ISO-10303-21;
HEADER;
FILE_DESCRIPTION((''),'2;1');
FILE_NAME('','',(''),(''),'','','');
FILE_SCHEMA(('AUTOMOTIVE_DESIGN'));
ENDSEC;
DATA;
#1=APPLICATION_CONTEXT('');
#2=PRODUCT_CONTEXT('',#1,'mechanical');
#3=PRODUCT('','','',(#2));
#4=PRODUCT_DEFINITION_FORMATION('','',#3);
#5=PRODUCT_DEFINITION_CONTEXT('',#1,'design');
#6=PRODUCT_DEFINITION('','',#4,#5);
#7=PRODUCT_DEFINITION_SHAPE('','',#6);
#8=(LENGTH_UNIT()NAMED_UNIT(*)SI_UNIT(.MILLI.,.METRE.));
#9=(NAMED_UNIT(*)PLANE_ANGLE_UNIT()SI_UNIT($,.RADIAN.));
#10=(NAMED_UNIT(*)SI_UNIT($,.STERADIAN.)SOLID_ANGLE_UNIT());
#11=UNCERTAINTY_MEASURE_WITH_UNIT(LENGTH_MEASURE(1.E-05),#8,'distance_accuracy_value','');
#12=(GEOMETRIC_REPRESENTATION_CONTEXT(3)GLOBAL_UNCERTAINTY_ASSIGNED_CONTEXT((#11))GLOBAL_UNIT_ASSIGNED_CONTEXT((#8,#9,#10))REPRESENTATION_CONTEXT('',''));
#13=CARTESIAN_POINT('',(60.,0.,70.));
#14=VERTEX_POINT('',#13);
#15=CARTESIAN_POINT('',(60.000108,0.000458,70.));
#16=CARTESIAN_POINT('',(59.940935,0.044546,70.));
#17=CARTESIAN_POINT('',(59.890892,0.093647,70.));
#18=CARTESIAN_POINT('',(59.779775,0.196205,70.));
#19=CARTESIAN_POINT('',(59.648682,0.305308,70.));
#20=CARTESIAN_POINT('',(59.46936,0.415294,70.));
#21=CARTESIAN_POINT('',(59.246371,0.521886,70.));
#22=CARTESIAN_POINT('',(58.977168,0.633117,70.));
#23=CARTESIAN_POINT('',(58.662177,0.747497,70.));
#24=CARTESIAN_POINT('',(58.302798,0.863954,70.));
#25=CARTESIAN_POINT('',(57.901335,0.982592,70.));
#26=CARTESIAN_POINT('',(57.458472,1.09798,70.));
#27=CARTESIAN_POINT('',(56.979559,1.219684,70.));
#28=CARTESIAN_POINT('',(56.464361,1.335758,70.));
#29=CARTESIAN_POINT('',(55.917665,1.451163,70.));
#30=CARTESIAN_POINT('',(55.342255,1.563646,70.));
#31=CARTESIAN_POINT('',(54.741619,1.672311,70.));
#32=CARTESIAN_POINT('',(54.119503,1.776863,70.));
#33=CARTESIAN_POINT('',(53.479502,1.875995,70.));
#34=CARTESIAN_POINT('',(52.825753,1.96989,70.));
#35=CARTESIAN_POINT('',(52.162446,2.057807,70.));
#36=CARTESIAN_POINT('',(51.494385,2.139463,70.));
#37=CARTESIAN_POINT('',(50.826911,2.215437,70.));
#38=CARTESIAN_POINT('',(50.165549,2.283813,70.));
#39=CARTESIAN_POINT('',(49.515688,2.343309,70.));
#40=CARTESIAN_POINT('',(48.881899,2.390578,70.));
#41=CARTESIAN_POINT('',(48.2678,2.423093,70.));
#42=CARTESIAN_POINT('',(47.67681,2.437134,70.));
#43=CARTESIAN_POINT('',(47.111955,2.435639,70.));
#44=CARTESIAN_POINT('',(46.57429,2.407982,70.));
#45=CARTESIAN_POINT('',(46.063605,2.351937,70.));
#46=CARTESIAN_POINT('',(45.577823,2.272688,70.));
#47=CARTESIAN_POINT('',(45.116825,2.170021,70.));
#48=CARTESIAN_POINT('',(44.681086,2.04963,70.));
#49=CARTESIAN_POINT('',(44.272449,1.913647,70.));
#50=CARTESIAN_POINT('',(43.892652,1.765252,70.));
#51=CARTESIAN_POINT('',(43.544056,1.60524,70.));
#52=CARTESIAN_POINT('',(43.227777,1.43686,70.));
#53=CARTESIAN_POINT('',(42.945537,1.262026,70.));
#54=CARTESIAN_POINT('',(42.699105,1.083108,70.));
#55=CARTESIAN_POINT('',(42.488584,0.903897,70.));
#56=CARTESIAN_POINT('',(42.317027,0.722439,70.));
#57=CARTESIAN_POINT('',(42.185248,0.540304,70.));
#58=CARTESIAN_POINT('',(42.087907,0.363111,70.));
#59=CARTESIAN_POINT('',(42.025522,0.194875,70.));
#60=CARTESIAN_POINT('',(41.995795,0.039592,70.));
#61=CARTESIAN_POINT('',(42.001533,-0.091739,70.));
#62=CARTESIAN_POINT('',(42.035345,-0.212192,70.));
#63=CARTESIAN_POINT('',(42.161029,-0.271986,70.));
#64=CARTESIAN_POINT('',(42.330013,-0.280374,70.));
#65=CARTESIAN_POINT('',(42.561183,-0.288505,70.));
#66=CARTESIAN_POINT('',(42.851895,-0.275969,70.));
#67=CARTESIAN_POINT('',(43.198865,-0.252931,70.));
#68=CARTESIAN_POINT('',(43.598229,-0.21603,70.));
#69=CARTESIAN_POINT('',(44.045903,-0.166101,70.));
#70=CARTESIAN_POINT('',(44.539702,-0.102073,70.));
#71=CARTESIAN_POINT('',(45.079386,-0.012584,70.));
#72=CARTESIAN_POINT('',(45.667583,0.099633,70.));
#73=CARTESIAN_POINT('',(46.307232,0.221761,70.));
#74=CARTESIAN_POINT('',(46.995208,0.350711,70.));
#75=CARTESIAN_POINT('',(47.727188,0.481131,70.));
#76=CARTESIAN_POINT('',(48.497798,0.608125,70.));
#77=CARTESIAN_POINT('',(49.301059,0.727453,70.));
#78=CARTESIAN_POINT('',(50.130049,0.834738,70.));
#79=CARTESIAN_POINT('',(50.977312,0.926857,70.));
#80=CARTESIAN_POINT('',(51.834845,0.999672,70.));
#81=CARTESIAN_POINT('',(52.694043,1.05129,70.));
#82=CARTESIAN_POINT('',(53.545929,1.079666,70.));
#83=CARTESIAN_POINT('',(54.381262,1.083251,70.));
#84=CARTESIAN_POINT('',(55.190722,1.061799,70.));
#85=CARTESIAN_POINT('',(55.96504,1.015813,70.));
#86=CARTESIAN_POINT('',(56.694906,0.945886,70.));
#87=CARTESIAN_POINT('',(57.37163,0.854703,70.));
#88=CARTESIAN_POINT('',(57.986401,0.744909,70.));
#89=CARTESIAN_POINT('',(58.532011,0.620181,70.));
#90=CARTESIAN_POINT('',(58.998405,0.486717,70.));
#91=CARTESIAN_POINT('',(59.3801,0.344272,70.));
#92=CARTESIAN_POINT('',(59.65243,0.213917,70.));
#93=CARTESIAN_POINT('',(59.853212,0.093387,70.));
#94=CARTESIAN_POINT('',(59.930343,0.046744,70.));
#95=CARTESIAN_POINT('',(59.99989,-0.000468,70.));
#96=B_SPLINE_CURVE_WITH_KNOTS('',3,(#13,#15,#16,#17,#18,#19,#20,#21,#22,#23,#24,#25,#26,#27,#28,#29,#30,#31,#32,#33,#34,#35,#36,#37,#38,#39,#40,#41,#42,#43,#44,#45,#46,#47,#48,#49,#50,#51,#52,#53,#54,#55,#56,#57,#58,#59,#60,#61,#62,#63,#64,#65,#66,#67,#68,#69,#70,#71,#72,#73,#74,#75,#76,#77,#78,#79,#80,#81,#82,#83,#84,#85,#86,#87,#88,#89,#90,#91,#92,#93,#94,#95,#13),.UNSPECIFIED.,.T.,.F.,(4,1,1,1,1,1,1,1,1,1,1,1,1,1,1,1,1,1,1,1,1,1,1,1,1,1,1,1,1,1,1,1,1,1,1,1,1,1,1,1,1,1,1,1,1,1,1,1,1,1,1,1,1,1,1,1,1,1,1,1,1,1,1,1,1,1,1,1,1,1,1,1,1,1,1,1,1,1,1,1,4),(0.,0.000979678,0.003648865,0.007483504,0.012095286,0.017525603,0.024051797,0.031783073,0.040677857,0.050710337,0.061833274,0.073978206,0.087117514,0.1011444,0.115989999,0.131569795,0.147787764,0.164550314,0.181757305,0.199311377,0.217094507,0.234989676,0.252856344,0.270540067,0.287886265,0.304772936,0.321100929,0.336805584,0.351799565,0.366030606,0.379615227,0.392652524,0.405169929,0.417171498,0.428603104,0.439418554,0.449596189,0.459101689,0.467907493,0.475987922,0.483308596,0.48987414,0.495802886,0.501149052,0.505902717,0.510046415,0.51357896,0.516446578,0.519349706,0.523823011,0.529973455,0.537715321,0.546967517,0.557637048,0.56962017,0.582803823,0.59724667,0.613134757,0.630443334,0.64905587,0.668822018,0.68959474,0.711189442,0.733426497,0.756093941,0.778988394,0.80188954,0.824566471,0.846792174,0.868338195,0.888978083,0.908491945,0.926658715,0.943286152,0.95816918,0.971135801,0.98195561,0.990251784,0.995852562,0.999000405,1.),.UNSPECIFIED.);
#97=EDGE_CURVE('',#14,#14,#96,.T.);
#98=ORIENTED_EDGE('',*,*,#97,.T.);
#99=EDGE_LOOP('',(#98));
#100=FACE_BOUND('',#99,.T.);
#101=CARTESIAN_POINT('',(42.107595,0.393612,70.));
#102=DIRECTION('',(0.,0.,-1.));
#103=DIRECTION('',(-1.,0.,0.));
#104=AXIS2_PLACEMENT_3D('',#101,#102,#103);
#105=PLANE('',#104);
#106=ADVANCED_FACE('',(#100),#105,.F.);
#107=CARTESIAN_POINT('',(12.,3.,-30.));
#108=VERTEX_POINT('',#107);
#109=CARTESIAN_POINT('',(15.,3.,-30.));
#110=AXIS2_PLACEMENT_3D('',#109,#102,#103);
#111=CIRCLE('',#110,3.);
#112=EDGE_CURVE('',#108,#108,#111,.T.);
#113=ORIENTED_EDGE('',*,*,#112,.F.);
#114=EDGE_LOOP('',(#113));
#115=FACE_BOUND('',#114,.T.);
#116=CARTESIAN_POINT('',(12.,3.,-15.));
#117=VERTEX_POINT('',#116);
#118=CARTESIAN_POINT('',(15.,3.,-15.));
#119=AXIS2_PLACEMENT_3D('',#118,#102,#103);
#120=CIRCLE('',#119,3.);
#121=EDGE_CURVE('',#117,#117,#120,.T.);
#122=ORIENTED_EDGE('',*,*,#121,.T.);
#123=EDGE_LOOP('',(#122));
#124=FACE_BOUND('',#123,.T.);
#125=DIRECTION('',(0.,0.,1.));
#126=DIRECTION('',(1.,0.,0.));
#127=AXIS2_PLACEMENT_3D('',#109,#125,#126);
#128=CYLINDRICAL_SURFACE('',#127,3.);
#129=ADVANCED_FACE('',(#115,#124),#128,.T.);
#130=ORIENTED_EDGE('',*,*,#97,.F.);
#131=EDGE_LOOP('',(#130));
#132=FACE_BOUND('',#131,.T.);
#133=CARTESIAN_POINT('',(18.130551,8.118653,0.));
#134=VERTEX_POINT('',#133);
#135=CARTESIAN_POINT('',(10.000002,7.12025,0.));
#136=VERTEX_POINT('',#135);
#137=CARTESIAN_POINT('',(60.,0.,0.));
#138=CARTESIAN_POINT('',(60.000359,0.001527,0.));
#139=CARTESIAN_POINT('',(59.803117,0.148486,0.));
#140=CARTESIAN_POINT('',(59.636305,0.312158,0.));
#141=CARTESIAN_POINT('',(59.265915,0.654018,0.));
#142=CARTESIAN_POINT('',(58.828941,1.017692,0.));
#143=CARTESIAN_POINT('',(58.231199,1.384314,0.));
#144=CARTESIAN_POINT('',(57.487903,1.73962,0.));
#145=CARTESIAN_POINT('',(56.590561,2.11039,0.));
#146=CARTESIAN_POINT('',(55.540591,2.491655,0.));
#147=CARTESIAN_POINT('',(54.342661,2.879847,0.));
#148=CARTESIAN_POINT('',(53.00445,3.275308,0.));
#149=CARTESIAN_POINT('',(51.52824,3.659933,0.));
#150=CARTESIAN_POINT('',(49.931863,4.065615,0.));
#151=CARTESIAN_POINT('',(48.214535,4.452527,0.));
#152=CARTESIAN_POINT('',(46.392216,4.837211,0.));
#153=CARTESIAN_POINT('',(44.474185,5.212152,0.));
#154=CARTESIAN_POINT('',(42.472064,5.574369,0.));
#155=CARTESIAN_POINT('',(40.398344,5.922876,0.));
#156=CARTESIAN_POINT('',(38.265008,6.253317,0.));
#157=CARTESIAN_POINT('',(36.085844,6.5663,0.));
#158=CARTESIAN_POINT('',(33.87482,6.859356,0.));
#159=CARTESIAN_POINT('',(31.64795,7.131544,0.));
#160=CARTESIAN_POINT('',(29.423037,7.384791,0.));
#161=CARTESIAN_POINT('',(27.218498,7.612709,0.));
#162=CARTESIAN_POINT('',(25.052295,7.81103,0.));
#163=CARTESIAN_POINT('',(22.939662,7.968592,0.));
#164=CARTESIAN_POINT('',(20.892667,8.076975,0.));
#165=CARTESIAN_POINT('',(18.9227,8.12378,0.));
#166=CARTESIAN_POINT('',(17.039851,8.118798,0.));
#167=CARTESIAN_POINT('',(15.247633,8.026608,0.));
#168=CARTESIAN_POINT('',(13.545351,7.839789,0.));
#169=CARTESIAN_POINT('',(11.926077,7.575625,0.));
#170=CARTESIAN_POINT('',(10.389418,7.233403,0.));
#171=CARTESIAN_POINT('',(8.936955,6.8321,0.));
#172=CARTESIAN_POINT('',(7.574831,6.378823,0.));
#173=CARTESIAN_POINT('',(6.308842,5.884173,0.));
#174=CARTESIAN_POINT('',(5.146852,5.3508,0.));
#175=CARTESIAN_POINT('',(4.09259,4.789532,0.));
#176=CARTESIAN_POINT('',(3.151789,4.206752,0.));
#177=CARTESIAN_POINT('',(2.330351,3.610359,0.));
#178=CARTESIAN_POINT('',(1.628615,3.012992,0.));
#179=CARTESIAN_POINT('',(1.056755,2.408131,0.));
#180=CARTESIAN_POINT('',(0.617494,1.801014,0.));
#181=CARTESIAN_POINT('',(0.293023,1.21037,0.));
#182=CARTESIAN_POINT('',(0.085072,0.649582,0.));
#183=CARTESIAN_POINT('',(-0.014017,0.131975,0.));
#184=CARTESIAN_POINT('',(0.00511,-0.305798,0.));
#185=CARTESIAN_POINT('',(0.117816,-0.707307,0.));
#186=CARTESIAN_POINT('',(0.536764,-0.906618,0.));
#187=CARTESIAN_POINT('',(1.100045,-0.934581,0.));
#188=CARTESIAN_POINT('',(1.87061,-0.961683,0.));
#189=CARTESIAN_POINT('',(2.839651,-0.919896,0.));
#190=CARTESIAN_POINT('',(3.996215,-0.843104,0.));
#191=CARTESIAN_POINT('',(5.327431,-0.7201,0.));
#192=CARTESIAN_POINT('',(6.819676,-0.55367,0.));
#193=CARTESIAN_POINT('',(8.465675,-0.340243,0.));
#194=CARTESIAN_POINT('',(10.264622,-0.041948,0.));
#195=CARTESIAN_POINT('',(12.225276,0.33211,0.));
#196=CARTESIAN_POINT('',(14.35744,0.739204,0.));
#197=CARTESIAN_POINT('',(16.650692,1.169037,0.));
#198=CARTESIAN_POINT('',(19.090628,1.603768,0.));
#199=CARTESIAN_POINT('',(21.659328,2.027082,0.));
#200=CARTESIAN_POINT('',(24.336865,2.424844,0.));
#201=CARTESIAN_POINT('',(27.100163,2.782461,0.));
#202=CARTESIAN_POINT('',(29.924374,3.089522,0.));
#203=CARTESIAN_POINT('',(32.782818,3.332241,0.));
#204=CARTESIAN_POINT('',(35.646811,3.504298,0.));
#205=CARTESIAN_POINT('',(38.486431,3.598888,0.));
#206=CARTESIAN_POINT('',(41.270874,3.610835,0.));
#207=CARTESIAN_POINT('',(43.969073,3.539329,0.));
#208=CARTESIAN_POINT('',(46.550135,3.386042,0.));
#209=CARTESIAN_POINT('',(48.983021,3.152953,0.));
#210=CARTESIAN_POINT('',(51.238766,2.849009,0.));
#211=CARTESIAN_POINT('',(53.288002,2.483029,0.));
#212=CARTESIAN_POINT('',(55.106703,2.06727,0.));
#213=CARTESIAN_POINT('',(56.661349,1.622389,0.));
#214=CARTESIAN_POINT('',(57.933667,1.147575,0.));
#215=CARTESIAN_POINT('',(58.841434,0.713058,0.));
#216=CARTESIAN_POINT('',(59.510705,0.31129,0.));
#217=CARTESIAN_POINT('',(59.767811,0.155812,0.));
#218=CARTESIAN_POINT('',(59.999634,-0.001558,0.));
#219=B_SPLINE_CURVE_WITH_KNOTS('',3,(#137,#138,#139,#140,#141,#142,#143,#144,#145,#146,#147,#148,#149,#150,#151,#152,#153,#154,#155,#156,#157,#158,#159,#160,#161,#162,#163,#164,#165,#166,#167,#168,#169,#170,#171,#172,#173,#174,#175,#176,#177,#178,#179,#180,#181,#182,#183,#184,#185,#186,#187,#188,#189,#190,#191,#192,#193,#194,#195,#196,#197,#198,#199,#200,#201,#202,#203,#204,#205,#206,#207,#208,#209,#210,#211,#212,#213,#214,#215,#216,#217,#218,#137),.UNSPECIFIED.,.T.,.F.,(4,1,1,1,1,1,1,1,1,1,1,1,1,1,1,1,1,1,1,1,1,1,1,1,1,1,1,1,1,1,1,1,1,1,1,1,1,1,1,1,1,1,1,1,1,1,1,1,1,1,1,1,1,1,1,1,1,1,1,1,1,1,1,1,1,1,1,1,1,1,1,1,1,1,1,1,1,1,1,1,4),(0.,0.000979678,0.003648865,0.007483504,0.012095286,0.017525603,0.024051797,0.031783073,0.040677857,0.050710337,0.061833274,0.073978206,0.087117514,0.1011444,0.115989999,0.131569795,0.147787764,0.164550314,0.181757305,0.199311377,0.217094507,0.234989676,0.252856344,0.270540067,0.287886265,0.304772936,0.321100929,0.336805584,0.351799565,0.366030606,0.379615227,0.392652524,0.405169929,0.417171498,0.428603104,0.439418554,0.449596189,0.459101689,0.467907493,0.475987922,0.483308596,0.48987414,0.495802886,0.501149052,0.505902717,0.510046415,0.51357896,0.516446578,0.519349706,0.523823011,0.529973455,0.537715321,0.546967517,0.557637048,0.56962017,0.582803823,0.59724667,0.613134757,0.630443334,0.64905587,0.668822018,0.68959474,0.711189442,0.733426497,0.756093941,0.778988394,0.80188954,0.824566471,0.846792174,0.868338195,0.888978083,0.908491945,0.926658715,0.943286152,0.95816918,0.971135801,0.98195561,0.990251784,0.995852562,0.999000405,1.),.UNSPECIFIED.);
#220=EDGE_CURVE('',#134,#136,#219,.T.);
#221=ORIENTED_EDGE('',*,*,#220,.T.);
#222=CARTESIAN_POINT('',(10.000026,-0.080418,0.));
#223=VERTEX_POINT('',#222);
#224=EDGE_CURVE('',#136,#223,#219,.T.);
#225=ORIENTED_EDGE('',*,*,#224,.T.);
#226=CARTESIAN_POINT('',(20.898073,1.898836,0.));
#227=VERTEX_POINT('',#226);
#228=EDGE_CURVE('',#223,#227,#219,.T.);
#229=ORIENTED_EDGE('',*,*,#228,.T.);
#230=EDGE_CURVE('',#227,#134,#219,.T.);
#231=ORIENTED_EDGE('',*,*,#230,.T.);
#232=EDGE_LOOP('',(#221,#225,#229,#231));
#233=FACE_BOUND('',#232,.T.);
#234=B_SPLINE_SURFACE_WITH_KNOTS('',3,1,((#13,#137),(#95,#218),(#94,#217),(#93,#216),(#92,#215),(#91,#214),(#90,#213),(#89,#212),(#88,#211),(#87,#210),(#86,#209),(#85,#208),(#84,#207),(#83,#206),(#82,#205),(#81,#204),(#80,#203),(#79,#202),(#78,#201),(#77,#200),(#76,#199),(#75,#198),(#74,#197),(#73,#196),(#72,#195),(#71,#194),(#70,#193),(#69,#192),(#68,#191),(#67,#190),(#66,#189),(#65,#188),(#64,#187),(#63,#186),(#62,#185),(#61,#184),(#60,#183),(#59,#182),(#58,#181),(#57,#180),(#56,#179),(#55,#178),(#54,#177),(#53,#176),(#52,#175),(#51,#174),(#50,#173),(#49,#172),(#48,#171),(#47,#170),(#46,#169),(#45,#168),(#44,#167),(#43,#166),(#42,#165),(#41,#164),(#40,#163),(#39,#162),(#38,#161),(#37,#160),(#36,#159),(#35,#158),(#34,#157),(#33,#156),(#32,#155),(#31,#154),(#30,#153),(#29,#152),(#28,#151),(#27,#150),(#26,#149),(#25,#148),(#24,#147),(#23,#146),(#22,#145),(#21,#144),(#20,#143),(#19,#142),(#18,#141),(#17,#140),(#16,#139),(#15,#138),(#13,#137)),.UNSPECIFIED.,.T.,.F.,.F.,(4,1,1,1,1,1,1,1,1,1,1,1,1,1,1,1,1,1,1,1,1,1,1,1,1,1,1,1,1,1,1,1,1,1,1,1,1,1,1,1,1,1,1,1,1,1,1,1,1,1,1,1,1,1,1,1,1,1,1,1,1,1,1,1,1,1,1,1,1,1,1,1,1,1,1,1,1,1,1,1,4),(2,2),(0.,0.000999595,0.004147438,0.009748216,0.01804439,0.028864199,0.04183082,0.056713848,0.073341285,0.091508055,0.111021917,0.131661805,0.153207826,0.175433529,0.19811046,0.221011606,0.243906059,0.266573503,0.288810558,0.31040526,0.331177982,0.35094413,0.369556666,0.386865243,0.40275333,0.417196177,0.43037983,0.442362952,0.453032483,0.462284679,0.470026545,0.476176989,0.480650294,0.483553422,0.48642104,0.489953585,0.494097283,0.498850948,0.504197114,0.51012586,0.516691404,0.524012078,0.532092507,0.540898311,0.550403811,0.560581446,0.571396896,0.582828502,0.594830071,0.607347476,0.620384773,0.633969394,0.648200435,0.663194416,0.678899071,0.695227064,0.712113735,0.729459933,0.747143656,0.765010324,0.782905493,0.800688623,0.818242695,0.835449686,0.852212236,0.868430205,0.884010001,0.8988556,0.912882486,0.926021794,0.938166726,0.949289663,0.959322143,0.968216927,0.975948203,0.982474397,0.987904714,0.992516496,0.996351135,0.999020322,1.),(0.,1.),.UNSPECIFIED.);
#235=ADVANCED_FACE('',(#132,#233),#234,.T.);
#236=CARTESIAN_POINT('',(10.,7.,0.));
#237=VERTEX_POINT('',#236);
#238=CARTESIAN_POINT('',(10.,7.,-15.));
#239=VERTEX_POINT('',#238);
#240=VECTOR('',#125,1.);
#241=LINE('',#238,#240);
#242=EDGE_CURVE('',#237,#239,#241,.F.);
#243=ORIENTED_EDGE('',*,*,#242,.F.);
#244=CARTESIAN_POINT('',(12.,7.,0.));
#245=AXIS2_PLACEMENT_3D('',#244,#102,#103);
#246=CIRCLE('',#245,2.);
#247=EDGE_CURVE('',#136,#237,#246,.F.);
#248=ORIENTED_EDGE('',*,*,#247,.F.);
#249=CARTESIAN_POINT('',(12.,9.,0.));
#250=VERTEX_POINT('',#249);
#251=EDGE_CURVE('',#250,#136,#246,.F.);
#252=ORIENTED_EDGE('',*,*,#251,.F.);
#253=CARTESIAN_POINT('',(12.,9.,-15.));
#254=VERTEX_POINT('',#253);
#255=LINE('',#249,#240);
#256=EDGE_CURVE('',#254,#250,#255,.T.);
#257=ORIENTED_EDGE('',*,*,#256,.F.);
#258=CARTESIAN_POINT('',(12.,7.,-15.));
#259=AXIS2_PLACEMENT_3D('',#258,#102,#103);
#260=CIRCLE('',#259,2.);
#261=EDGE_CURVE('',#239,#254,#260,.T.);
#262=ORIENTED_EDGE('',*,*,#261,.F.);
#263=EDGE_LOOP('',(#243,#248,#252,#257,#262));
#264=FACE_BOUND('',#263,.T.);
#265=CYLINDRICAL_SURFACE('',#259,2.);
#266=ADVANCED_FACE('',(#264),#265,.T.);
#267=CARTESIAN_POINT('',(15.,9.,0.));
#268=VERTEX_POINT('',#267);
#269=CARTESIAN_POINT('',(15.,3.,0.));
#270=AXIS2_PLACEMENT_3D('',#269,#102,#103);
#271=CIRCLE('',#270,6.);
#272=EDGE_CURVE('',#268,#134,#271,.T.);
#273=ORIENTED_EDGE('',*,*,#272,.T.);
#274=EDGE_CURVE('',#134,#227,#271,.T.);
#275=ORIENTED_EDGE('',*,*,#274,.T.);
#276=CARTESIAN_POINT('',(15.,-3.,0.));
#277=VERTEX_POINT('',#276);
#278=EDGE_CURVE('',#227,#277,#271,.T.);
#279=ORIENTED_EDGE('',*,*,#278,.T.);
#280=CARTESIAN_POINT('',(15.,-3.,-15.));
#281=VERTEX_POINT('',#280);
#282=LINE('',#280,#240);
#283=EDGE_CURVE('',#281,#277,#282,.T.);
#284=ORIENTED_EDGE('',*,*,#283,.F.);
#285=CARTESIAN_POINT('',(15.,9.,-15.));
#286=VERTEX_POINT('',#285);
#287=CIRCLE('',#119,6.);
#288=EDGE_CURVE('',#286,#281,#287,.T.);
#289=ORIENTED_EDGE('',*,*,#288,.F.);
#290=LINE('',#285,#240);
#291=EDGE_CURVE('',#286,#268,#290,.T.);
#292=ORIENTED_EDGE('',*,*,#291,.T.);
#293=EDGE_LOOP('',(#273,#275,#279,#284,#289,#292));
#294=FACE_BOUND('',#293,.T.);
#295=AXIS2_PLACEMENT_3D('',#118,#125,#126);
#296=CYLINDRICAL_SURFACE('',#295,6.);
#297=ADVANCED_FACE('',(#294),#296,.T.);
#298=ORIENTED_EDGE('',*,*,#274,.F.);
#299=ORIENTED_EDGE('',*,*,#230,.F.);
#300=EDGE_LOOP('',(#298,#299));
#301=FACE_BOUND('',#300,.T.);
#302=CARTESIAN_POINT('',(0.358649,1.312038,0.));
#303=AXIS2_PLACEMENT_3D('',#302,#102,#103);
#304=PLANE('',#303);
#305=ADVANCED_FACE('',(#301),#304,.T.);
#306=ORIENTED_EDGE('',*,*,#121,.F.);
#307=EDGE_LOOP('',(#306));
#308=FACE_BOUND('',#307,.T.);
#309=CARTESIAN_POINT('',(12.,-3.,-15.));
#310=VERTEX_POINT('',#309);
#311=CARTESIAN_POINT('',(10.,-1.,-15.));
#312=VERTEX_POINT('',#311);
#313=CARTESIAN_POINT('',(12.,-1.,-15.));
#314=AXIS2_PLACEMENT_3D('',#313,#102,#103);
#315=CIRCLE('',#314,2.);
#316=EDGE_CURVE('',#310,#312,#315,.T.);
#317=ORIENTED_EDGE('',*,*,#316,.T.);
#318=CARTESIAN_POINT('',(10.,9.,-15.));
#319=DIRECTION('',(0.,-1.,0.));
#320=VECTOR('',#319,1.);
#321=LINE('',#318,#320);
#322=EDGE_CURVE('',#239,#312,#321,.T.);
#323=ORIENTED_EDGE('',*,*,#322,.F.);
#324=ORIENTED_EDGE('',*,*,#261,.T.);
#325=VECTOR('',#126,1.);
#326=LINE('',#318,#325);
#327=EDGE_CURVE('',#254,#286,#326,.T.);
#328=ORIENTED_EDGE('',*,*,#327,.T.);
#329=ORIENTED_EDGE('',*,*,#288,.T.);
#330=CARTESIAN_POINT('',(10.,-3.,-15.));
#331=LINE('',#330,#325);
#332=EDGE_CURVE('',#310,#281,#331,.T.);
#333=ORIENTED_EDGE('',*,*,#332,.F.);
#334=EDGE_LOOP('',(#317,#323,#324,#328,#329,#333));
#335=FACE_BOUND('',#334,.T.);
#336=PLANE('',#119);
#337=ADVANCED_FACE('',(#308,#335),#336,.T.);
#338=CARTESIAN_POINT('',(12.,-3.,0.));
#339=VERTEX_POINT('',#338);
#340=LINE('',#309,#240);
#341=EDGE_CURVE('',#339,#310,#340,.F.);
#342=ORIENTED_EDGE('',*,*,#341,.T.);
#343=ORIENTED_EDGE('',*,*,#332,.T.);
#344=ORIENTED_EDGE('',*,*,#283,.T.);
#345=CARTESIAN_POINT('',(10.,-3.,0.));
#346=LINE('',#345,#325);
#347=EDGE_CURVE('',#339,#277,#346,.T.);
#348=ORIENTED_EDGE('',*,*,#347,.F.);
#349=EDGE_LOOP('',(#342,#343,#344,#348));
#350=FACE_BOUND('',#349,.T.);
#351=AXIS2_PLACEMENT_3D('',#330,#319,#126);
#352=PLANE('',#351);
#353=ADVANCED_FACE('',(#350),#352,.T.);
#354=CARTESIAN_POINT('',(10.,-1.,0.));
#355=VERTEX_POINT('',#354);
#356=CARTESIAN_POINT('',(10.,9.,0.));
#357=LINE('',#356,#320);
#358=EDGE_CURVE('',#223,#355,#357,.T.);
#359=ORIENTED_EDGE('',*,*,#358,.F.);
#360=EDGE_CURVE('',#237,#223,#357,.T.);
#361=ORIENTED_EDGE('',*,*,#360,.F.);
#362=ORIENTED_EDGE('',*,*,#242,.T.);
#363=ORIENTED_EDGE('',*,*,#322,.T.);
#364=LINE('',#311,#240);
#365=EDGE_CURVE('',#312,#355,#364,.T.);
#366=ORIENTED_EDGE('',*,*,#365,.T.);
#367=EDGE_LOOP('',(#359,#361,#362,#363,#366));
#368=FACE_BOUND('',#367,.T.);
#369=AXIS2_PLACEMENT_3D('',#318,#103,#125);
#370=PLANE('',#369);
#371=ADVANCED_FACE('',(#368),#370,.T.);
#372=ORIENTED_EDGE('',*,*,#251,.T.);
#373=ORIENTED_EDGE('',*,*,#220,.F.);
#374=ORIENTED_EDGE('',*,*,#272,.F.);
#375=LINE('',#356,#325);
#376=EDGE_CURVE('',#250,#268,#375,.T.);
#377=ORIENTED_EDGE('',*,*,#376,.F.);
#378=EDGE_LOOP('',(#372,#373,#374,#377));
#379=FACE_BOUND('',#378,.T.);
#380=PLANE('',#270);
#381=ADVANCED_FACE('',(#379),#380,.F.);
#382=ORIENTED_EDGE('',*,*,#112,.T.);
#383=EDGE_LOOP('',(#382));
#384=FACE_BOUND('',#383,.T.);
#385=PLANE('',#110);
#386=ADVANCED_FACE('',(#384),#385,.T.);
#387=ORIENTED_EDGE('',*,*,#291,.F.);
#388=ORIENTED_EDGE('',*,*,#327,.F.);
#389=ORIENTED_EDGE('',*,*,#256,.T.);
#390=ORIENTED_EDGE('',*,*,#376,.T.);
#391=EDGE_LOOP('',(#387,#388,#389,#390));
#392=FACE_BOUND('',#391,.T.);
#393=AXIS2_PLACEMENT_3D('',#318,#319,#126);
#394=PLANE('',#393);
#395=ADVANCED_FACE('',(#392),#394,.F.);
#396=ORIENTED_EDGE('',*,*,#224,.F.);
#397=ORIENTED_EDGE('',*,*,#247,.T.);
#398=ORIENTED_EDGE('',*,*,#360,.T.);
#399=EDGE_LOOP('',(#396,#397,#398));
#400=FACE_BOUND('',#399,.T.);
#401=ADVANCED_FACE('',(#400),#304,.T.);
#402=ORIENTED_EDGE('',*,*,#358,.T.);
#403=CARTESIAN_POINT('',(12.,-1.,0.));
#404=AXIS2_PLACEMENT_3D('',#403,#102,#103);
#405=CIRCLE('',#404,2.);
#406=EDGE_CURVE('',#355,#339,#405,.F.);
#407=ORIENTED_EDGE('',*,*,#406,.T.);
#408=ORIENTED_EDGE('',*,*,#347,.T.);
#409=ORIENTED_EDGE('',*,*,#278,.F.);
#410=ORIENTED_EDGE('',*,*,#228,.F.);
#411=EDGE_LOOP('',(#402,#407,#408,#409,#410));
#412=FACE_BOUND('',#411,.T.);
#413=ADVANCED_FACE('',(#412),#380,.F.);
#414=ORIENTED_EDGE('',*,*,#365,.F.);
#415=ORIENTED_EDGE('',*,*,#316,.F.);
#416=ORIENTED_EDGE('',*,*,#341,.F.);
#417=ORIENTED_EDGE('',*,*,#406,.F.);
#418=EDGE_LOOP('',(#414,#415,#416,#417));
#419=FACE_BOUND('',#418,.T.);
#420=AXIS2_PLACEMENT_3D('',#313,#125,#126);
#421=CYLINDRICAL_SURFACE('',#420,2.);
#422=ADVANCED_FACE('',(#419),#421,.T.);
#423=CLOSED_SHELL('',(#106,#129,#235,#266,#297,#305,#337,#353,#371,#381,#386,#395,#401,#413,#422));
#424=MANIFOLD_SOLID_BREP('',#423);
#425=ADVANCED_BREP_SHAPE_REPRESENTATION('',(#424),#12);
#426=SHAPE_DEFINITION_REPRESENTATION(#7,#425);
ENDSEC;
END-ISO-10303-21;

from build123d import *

# Parameters (mm, degrees)
BOSS_EXTRUDE2_DEPTH = 15
SKETCH6_R           = 3
BOSS_EXTRUDE3_DEPTH = 15
FILLET1_START       = -16
FILLET1_DEPTH       = 16


with BuildPart() as part:
    # Sketch3 → Loft1 section 0
    with BuildSketch(Plane.XY.offset(70)):
        with BuildLine():
            add(Edge.make_bspline(
                [(60, 0), (60.000107759, 0.00045823), (59.940935145, 0.044545857), (59.890891538, 0.093647308), (59.779774511, 0.196205337), (59.648682422, 0.305307561), (59.469359582, 0.415294301), (59.246370858, 0.521886024), (58.977168165, 0.633116991), (58.662177205, 0.747496515), (58.302798195, 0.863953961), (57.901335106, 0.982592376), (57.458471962, 1.097979924), (56.979558848, 1.219684363), (56.464360521, 1.335758178), (55.917664884, 1.451163432), (55.342255391, 1.563645721), (54.741619221, 1.672310848), (54.119503088, 1.776862794), (53.479502393, 1.875995081), (52.825753205, 1.969890082), (52.162446062, 2.057806833), (51.494385085, 2.13946315), (50.826910973, 2.215437436), (50.165549402, 2.283812601), (49.515688388, 2.343308945), (48.88189852, 2.390577682), (48.267800241, 2.423092507), (47.676809978, 2.437133923), (47.111955291, 2.435639306), (46.574289852, 2.407982369), (46.063605386, 2.351936832), (45.577823009, 2.272687612), (45.116825477, 2.170020947), (44.681086398, 2.04962996), (44.272449438, 1.913646961), (43.892652493, 1.765251918), (43.544055665, 1.605239875), (43.227776887, 1.436859538), (42.94553682, 1.262025717), (42.699105421, 1.083107561), (42.488584367, 0.903897458), (42.317026583, 0.722439194), (42.185248322, 0.540304202), (42.08790704, 0.363111111), (42.025521579, 0.194874666), (41.995794905, 0.039592478), (42.001532957, -0.091739447), (42.035344873, -0.212191985), (42.16102918, -0.271985507), (42.33001338, -0.28037435), (42.561183137, -0.288504849), (42.85189542, -0.275968725), (43.198864607, -0.252931149), (43.598229294, -0.216029949), (44.045902873, -0.166101037), (44.539702369, -0.102073031), (45.07938647, -0.012584366), (45.667582852, 0.09963297), (46.307232102, 0.221761241), (46.995207664, 0.350711186), (47.72718833, 0.481130505), (48.497798407, 0.608124713), (49.301059449, 0.727453141), (50.130048988, 0.834738394), (50.977312155, 0.926856584), (51.834845451, 0.99967222), (52.694043317, 1.051289527), (53.545929342, 1.07966642), (54.381262057, 1.083250625), (55.190722018, 1.061798612), (55.965040428, 1.015812577), (56.694906217, 0.945885863), (57.371629898, 0.8547026), (57.986400744, 0.744908581), (58.532010839, 0.620180946), (58.99840484, 0.486716819), (59.380100231, 0.344272382), (59.652430067, 0.213917485), (59.853211585, 0.093386968), (59.93034321, 0.046743647), (59.99989005, -0.000467545), (60, 0)],
                knots=[0, 0, 0, 0, 0.000979678, 0.003648865, 0.007483504, 0.012095286, 0.017525603, 0.024051797, 0.031783073, 0.040677857, 0.050710337, 0.061833274, 0.073978206, 0.087117514, 0.1011444, 0.115989999, 0.131569795, 0.147787764, 0.164550314, 0.181757305, 0.199311377, 0.217094507, 0.234989676, 0.252856344, 0.270540067, 0.287886265, 0.304772936, 0.321100929, 0.336805584, 0.351799565, 0.366030606, 0.379615227, 0.392652524, 0.405169929, 0.417171498, 0.428603104, 0.439418554, 0.449596189, 0.459101689, 0.467907493, 0.475987922, 0.483308596, 0.48987414, 0.495802886, 0.501149052, 0.505902717, 0.510046415, 0.51357896, 0.516446578, 0.519349706, 0.523823011, 0.529973455, 0.537715321, 0.546967517, 0.557637048, 0.56962017, 0.582803823, 0.59724667, 0.613134757, 0.630443334, 0.64905587, 0.668822018, 0.68959474, 0.711189442, 0.733426497, 0.756093941, 0.778988394, 0.80188954, 0.824566471, 0.846792174, 0.868338195, 0.888978083, 0.908491945, 0.926658715, 0.943286152, 0.95816918, 0.971135801, 0.98195561, 0.990251784, 0.995852562, 0.999000405, 1, 1, 1, 1], degree=3))
        make_face()
    # Sketch2 → Loft1 section 1
    with BuildSketch(Plane.XY):
        with BuildLine():
            add(Edge.make_bspline(
                [(60, 0), (60.000359197, 0.001527432), (59.80311715, 0.148486191), (59.636305128, 0.312157693), (59.265915035, 0.654017791), (58.828941408, 1.01769187), (58.231198607, 1.384314338), (57.487902859, 1.739620081), (56.590560551, 2.110389969), (55.540590684, 2.491655052), (54.342660651, 2.879846537), (53.004450354, 3.275307919), (51.528239873, 3.659933081), (49.931862826, 4.065614543), (48.21453507, 4.45252726), (46.392216281, 4.837211439), (44.474184637, 5.212152404), (42.47206407, 5.574369492), (40.398343628, 5.92287598), (38.265007978, 6.253316937), (36.085844017, 6.566300275), (33.874820207, 6.859356111), (31.647950283, 7.131543832), (29.423036576, 7.384791452), (27.218498007, 7.612708672), (25.052294626, 7.811029816), (22.939661735, 7.968592274), (20.892667469, 8.076975023), (18.922699926, 8.123779744), (17.039850969, 8.118797688), (15.247632842, 8.026607898), (13.545351286, 7.839789441), (11.926076695, 7.575625373), (10.389418256, 7.233403155), (8.93695466, 6.832099867), (7.574831461, 6.378823205), (6.308841643, 5.884173059), (5.146852216, 5.350799583), (4.092589623, 4.789531794), (3.151789401, 4.20675239), (2.330351404, 3.610358538), (1.628614556, 3.012991527), (1.056755276, 2.408130647), (0.617494407, 1.801014007), (0.293023466, 1.210370369), (0.085071932, 0.649582219), (-0.014016985, 0.131974926), (0.005109858, -0.305798158), (0.117816245, -0.707306616), (0.536763933, -0.906618356), (1.100044602, -0.934581165), (1.870610456, -0.96168283), (2.8396514, -0.91989575), (3.996215358, -0.843103831), (5.32743098, -0.720099828), (6.819676242, -0.553670124), (8.465674563, -0.340243438), (10.264621567, -0.041947886), (12.225276175, 0.332109901), (14.357440339, 0.739204138), (16.650692214, 1.169037288), (19.090627767, 1.60376835), (21.659328024, 2.027082377), (24.336864829, 2.424843805), (27.100163295, 2.782461315), (29.924373851, 3.089521947), (32.78281817, 3.332240734), (35.646811058, 3.504298425), (38.486431141, 3.598888068), (41.270873525, 3.610835418), (43.969073393, 3.539328707), (46.550134759, 3.386041923), (48.983020725, 3.152952876), (51.238766327, 2.849008665), (53.28800248, 2.483028604), (55.106702797, 2.06726982), (56.661349467, 1.622389398), (57.933667436, 1.147574605), (58.841433556, 0.713058282), (59.510705283, 0.311289894), (59.767810701, 0.155812155), (59.999633501, -0.001558484), (60, 0)],
                knots=[0, 0, 0, 0, 0.000979678, 0.003648865, 0.007483504, 0.012095286, 0.017525603, 0.024051797, 0.031783073, 0.040677857, 0.050710337, 0.061833274, 0.073978206, 0.087117514, 0.1011444, 0.115989999, 0.131569795, 0.147787764, 0.164550314, 0.181757305, 0.199311377, 0.217094507, 0.234989676, 0.252856344, 0.270540067, 0.287886265, 0.304772936, 0.321100929, 0.336805584, 0.351799565, 0.366030606, 0.379615227, 0.392652524, 0.405169929, 0.417171498, 0.428603104, 0.439418554, 0.449596189, 0.459101689, 0.467907493, 0.475987922, 0.483308596, 0.48987414, 0.495802886, 0.501149052, 0.505902717, 0.510046415, 0.51357896, 0.516446578, 0.519349706, 0.523823011, 0.529973455, 0.537715321, 0.546967517, 0.557637048, 0.56962017, 0.582803823, 0.59724667, 0.613134757, 0.630443334, 0.64905587, 0.668822018, 0.68959474, 0.711189442, 0.733426497, 0.756093941, 0.778988394, 0.80188954, 0.824566471, 0.846792174, 0.868338195, 0.888978083, 0.908491945, 0.926658715, 0.943286152, 0.95816918, 0.971135801, 0.98195561, 0.990251784, 0.995852562, 0.999000405, 1, 1, 1, 1], degree=3))
        make_face()
    loft()

    # Sketch5 → Boss-Extrude2 (add)
    with BuildSketch(Plane.XY):
        with BuildLine():
            Line((10, 9), (15, 9))
            ThreePointArc((15, 9), (21, 3), (15, -3))
            Line((15, -3), (10, -3))
            Line((10, -3), (10, 9))
        make_face()
    extrude(amount=-BOSS_EXTRUDE2_DEPTH)

    # Sketch6 → Boss-Extrude3 (add)
    with BuildSketch(Plane(origin=(0, 0, -15), x_dir=(-1, 0, 0), z_dir=(0, 0, -1))):
        with Locations((-15, 3)):
            Circle(SKETCH6_R)
    extrude(amount=BOSS_EXTRUDE3_DEPTH)

    # Fillet1: read off the stored shape, not the designer's step
    # Fillet1 outline → Fillet1 (cut)
    with BuildSketch(Plane.XY.offset(FILLET1_START)):
        with BuildLine():
            Line((10, 9), (10, 7))
            ThreePointArc((10, 7), (10.585786438, 8.414213562), (12, 9))
            Line((12, 9), (10, 9))
        make_face()
        with BuildLine():
            ThreePointArc((12, -3), (10.585786438, -2.414213562), (10, -1))
            Line((10, -1), (10, -3))
            Line((10, -3), (12, -3))
        make_face()
    extrude(amount=FILLET1_DEPTH, mode=Mode.SUBTRACT)


solid = part.part
